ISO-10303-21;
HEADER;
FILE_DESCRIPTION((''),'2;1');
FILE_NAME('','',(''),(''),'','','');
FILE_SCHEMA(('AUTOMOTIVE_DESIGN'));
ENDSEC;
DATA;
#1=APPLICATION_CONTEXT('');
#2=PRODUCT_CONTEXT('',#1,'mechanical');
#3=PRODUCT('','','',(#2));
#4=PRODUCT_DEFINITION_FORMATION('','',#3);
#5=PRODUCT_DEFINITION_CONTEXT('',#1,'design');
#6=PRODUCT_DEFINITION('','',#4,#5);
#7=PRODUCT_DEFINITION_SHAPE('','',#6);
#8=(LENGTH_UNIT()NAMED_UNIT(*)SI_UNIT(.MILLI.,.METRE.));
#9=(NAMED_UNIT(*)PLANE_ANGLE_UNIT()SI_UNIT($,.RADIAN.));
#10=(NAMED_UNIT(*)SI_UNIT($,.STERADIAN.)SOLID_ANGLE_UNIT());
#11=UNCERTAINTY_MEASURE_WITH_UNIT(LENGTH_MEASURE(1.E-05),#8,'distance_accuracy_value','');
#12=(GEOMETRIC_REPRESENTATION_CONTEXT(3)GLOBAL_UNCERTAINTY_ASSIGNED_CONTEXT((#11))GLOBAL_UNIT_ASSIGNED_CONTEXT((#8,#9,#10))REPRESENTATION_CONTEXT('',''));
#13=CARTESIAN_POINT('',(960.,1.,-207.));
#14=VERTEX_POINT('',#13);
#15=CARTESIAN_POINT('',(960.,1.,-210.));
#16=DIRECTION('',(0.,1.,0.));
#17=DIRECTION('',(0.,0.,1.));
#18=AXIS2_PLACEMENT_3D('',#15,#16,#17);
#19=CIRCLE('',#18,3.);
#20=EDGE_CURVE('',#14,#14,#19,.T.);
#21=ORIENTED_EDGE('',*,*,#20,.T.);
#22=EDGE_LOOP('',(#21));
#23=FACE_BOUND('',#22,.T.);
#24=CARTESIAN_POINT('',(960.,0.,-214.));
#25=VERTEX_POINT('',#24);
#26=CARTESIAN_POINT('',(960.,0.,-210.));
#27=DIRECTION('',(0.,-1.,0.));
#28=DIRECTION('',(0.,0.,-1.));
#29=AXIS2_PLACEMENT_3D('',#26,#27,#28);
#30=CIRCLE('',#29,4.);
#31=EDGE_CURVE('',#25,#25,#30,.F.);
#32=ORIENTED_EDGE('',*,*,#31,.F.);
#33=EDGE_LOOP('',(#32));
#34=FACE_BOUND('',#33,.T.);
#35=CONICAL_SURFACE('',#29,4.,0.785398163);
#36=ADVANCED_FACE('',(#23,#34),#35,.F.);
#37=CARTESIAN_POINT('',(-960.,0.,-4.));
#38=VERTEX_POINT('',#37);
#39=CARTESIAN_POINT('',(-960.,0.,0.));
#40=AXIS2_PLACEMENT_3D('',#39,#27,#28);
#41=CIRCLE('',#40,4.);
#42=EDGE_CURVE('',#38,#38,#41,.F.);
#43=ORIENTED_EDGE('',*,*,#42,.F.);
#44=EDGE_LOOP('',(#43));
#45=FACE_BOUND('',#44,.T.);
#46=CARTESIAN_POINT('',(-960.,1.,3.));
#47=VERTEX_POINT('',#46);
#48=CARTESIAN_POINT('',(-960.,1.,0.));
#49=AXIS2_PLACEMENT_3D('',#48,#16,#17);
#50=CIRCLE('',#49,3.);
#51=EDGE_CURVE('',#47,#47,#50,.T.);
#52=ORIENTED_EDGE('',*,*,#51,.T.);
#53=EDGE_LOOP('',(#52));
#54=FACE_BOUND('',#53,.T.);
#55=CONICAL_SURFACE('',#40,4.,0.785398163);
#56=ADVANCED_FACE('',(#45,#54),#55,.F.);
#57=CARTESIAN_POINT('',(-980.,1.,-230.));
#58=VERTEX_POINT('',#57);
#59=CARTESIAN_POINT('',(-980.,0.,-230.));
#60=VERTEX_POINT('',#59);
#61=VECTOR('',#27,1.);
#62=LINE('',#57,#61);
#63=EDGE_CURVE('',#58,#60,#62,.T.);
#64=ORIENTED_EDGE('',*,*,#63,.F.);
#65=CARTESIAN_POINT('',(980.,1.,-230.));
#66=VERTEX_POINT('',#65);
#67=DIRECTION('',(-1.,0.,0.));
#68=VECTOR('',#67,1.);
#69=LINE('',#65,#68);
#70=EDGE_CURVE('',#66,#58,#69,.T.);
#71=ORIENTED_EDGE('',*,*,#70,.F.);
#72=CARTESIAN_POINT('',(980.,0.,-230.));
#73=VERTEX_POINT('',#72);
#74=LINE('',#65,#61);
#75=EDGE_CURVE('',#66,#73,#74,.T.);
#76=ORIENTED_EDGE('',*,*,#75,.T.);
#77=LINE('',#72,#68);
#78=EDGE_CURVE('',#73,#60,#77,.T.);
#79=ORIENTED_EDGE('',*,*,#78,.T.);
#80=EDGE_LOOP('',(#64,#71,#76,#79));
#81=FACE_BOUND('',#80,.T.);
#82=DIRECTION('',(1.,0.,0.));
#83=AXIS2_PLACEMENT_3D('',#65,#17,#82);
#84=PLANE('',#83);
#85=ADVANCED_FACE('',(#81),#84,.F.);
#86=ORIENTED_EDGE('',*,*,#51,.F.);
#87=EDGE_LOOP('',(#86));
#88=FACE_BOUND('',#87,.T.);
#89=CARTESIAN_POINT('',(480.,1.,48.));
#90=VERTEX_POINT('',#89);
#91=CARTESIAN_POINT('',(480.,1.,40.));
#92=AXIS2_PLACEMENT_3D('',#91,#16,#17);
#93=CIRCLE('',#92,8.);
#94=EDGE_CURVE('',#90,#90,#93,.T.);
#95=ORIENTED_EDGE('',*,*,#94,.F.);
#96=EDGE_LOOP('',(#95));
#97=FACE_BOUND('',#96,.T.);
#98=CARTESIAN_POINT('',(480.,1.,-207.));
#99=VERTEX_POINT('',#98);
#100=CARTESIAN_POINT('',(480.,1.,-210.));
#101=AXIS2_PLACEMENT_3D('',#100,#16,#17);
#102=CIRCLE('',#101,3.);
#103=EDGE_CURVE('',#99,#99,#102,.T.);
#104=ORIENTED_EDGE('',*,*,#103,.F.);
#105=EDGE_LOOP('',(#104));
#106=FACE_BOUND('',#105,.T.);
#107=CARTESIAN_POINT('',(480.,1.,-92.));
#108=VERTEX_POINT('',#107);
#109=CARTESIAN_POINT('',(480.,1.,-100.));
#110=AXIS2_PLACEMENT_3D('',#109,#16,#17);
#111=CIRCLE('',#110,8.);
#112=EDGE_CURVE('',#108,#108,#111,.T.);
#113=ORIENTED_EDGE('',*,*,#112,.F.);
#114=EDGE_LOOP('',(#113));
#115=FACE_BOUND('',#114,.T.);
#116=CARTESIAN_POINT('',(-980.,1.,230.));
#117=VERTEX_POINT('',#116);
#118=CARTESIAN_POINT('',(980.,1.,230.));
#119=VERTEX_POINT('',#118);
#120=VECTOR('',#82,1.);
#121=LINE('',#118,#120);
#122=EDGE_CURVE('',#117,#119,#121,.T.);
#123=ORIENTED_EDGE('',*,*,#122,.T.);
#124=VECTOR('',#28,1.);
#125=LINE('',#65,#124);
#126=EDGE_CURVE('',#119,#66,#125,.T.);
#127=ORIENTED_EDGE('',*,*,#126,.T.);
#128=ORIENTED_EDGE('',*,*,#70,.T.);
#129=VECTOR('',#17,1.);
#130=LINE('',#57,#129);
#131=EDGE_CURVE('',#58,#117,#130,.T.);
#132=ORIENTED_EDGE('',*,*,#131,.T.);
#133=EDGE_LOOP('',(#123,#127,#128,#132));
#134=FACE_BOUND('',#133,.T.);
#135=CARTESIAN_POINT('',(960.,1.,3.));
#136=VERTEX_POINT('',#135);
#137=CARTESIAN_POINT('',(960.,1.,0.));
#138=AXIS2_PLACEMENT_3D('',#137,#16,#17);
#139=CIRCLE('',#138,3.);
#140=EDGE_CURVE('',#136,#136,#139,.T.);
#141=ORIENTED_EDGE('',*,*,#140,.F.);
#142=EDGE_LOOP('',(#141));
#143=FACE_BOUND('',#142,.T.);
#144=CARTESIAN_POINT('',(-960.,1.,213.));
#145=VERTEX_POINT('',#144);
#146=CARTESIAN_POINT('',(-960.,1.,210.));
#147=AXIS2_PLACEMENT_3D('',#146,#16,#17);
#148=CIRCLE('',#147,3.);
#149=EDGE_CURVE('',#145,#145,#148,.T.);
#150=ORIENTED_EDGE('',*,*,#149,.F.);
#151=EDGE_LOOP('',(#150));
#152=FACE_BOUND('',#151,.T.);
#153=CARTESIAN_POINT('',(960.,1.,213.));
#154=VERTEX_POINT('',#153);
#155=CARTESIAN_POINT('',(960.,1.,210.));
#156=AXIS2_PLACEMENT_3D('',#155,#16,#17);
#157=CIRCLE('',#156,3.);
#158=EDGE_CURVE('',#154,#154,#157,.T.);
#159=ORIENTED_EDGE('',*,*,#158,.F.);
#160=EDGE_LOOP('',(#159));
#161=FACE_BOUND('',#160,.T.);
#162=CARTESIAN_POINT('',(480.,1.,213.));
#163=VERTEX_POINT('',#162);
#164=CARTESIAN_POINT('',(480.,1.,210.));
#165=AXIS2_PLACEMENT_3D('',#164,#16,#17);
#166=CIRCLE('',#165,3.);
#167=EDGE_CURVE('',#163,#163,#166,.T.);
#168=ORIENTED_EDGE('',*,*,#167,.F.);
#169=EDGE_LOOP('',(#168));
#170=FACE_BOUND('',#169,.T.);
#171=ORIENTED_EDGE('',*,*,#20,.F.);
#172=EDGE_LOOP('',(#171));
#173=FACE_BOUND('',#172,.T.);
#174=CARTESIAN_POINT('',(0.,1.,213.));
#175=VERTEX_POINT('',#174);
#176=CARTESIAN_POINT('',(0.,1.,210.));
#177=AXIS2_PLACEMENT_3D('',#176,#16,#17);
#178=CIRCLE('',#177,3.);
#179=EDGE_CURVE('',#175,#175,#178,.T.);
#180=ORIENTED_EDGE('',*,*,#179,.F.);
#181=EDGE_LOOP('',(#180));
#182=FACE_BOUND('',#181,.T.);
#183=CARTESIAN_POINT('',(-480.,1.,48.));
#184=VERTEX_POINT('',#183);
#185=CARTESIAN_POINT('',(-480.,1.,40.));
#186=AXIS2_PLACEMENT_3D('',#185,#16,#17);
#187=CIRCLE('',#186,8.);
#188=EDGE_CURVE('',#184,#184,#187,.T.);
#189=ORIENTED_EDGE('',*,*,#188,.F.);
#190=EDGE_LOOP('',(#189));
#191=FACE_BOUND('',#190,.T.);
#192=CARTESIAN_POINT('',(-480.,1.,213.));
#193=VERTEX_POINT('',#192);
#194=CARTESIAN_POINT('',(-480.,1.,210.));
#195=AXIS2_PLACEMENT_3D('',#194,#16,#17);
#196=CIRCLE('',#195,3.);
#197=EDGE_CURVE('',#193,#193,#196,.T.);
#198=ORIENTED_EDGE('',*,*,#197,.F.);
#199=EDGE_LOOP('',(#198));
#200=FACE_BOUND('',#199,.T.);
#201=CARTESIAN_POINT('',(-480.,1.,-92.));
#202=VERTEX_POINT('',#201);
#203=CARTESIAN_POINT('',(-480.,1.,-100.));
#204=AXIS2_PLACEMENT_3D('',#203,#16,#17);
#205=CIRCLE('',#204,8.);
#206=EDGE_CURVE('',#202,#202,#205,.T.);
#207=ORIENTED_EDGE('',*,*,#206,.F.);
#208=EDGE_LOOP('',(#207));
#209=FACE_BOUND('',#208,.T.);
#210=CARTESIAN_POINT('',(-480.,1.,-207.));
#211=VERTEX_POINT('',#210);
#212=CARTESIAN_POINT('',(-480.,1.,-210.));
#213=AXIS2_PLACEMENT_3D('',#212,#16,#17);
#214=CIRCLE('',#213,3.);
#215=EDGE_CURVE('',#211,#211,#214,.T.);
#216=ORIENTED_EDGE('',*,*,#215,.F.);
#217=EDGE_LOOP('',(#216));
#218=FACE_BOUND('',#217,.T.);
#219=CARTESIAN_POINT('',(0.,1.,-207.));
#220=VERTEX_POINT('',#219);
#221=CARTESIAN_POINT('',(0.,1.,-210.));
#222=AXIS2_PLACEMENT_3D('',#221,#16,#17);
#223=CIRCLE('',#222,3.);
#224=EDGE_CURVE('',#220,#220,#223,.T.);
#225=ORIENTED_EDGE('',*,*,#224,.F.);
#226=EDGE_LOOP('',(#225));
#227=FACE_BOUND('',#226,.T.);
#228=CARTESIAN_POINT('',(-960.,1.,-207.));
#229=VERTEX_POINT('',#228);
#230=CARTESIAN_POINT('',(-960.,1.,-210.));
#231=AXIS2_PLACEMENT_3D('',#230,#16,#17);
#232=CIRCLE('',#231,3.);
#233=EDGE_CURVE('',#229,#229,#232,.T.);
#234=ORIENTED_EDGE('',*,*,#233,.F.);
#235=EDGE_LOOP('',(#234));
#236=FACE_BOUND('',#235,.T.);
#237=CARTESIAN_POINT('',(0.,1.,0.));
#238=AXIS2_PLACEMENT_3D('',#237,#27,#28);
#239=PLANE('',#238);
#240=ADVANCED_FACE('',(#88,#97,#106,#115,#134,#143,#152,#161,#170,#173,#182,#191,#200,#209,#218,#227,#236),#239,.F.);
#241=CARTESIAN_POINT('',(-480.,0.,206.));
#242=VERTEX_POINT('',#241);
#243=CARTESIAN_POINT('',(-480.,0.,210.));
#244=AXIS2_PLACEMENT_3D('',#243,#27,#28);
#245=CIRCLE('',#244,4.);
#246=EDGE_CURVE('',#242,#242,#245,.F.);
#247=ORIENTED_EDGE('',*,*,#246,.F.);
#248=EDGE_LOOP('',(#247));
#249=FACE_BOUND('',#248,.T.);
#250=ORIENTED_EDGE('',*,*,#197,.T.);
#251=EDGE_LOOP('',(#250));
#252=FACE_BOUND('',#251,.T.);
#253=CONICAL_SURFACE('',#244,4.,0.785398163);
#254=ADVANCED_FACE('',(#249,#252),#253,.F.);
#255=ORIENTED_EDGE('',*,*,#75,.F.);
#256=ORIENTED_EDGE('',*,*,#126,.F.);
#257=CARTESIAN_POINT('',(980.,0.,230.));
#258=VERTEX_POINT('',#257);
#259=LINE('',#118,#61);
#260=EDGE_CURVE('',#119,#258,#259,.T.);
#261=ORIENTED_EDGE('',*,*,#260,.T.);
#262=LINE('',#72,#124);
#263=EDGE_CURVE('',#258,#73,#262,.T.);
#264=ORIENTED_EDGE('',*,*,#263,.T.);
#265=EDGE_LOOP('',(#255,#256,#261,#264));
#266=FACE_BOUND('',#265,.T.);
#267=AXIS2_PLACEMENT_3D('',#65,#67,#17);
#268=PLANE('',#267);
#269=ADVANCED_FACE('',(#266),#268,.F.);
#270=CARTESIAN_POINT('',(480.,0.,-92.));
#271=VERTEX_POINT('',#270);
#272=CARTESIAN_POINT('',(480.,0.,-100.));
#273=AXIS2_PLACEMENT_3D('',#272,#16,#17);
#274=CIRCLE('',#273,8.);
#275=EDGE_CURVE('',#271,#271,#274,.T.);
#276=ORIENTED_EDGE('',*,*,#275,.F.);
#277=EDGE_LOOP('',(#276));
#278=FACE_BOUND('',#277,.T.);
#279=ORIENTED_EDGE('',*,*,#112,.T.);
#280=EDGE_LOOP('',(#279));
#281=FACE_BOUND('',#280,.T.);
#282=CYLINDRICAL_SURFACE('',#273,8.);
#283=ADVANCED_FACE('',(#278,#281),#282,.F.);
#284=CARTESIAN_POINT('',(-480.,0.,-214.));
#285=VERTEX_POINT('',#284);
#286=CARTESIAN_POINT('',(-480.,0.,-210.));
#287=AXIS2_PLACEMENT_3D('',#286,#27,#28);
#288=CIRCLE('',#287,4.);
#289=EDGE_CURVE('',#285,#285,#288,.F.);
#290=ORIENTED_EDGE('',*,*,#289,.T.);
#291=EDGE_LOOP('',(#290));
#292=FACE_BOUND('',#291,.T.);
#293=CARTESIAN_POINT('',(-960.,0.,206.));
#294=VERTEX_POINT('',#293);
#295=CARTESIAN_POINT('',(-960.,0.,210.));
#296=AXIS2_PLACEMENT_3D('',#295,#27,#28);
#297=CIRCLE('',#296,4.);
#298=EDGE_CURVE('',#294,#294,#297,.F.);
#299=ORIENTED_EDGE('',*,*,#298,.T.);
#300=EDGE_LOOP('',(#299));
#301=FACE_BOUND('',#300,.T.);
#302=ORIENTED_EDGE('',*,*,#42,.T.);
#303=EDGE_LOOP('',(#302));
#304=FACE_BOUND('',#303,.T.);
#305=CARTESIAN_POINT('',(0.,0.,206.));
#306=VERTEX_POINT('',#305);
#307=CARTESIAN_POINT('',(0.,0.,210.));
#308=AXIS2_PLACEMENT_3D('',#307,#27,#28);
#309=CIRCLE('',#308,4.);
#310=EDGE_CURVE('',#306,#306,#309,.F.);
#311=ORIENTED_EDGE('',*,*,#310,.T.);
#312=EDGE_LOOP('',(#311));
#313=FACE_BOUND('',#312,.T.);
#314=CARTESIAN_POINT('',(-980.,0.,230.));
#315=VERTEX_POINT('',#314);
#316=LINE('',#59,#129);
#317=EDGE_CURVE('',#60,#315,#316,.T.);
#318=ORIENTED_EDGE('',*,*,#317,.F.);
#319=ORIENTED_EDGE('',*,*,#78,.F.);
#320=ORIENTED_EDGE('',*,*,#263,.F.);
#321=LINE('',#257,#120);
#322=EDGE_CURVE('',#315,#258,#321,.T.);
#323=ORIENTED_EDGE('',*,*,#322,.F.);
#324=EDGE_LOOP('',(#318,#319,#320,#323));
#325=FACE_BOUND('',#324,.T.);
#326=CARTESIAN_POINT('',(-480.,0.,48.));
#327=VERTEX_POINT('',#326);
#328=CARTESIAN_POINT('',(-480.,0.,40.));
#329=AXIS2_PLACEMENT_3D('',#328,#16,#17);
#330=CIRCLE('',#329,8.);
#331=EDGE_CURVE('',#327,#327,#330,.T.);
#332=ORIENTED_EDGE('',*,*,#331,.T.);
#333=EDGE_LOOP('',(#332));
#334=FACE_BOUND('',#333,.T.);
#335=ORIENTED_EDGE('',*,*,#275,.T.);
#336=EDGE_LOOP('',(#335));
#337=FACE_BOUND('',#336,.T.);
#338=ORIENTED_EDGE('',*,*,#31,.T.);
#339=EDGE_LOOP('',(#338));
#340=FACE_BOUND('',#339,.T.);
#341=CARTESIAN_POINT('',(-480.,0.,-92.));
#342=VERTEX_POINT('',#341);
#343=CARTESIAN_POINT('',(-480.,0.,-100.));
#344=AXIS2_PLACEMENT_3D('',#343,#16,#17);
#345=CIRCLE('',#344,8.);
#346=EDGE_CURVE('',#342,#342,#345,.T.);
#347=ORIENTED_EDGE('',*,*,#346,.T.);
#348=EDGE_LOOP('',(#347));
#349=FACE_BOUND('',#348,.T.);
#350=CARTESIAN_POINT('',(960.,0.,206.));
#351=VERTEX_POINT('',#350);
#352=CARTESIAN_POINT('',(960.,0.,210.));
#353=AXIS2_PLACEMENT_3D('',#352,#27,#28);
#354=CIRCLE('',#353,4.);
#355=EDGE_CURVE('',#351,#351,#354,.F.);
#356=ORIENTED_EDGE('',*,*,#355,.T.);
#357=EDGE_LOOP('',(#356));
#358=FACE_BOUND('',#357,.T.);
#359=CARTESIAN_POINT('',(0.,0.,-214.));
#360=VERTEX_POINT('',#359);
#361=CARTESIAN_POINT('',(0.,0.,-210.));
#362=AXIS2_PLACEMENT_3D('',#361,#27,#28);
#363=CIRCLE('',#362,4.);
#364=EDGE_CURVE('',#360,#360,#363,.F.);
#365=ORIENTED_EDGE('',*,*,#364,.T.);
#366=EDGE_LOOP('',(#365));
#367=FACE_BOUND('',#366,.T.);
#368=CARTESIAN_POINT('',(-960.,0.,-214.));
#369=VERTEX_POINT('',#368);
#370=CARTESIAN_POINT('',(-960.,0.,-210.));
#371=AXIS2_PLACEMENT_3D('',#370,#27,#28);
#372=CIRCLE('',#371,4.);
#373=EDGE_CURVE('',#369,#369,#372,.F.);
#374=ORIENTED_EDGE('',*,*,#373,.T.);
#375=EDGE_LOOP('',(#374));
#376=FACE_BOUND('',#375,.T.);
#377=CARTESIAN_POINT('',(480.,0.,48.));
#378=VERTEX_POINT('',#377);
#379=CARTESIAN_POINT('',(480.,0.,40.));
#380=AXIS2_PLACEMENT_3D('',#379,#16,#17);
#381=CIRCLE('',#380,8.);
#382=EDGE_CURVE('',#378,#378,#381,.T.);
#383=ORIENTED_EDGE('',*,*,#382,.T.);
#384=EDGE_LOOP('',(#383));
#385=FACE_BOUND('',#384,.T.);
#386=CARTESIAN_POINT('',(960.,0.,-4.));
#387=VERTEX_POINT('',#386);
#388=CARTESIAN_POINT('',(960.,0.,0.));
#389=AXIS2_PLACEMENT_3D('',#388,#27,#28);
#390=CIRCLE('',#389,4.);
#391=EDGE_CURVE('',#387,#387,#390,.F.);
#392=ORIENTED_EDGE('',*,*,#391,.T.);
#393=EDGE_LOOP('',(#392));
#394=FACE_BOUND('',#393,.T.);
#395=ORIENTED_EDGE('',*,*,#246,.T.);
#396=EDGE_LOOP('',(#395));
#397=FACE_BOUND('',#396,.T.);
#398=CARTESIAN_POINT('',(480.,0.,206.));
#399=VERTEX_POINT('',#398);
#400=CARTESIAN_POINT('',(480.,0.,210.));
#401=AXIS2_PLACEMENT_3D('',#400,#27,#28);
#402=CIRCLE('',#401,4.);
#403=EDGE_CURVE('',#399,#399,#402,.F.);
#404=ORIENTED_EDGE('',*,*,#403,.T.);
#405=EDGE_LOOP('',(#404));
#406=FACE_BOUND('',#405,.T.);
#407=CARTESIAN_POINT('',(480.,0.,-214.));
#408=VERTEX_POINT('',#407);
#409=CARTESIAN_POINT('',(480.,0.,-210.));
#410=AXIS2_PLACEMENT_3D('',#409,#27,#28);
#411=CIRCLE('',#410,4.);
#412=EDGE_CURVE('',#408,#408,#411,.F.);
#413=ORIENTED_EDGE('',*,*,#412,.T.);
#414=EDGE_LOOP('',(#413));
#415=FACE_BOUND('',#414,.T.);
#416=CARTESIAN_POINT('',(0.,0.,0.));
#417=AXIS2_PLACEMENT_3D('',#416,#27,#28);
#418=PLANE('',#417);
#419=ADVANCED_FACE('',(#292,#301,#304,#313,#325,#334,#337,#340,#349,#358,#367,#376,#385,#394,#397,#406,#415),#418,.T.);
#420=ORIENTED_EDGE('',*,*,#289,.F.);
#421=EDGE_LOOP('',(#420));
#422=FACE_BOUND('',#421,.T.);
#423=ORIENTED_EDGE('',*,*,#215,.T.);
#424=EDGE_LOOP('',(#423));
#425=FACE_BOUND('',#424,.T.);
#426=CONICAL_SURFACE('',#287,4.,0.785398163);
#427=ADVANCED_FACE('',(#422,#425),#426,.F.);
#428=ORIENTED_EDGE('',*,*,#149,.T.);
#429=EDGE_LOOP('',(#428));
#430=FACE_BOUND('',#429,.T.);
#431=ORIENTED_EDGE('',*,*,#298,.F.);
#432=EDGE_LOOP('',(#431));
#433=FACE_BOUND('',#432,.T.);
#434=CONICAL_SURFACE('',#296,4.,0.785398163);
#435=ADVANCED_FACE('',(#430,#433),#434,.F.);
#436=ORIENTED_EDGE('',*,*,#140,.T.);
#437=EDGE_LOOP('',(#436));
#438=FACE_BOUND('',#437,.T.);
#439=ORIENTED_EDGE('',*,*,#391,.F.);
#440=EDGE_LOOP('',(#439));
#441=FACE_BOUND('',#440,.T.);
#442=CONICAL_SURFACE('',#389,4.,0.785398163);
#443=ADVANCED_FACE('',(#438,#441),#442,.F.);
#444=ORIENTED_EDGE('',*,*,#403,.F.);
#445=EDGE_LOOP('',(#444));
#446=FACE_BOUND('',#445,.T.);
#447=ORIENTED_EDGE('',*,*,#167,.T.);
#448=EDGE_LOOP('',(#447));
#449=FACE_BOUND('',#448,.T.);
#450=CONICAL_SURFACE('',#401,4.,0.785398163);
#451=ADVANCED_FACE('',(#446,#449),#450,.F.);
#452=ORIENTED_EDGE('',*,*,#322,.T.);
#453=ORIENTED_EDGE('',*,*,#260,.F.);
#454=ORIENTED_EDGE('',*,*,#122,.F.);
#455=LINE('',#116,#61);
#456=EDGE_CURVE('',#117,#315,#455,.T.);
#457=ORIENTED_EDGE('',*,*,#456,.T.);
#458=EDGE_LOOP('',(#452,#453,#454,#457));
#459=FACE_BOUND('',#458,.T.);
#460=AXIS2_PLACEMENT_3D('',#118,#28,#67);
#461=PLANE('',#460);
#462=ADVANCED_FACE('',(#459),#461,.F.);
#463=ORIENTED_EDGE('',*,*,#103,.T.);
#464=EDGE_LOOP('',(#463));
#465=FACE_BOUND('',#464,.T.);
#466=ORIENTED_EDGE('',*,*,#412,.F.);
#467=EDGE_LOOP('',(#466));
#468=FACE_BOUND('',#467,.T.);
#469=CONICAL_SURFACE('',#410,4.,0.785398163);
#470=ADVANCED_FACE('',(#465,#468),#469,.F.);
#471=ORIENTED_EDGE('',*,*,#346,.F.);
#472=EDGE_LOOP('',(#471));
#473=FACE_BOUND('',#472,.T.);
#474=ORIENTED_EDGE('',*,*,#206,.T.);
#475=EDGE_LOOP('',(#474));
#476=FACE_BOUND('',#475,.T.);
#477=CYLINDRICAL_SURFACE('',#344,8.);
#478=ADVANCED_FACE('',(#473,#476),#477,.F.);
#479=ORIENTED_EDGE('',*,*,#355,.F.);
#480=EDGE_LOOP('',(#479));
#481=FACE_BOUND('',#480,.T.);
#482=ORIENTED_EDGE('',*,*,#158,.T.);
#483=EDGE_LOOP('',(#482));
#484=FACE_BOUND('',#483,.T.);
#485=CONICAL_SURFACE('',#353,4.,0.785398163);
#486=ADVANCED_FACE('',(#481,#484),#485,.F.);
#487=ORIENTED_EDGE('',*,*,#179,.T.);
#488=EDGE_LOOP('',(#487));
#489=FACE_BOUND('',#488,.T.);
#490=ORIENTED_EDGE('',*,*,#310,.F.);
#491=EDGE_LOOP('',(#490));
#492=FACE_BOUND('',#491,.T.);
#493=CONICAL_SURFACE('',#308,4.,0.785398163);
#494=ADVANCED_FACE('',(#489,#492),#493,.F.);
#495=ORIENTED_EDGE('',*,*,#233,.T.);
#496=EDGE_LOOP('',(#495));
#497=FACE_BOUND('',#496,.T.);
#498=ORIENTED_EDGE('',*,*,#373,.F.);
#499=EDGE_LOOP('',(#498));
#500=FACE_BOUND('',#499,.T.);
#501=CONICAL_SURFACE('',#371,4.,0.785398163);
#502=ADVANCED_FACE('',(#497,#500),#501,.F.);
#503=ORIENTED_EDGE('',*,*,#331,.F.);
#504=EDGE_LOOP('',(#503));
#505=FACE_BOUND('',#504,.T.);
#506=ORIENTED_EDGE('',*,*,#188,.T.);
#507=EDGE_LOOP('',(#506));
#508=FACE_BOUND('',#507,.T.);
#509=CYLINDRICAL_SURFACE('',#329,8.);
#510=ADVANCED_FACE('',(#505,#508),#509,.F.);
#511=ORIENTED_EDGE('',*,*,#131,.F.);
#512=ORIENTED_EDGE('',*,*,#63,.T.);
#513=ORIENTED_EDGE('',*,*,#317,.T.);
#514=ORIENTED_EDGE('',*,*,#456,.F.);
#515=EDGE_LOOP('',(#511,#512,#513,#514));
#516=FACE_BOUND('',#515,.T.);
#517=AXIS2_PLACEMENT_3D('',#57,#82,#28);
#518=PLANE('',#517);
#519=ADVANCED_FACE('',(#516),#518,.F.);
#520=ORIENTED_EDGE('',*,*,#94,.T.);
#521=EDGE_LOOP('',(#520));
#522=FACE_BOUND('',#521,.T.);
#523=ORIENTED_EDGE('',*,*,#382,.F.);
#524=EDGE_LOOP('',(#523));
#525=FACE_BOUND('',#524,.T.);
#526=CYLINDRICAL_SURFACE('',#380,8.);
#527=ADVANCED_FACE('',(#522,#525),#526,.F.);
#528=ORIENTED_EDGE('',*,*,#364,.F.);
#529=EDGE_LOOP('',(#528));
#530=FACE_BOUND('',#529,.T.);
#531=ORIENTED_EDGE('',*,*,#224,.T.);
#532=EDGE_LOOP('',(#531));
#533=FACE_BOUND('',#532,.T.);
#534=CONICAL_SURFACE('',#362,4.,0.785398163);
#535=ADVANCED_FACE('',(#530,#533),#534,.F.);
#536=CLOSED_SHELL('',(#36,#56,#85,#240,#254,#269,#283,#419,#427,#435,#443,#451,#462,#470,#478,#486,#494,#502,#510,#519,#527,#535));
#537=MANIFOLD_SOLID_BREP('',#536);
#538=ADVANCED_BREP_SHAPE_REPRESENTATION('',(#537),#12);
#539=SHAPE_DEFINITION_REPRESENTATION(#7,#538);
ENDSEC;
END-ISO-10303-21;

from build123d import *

# Parameters (mm, degrees)
SKETCH1_W           = 1960
SKETCH1_H           = 460
BOSS_EXTRUDE1_DEPTH = 1
SKETCH2_R           = 8
SKETCH2_R_2         = 3
CUT_EXTRUDE1_DEPTH  = 1007.628531286
CHAMFER1_SIZE       = 1


with BuildPart() as part:
    # Sketch1 → Boss-Extrude1 (new body)
    with BuildSketch(Plane(origin=(0, 0, 0), x_dir=(1, 0, 0), z_dir=(0, 1, 0))):
        Rectangle(SKETCH1_W, SKETCH1_H)
    extrude(amount=BOSS_EXTRUDE1_DEPTH)

    # Sketch2 → Cut-Extrude1 (cut, through all)
    with BuildSketch(Plane(origin=(0, 1, 0), x_dir=(1, 0, 0), z_dir=(0, 1, 0))):
        with Locations(Location((480, -40, 0), (0, 0, 270))):
            Circle(SKETCH2_R)
        with Locations(Location((-480, -40, 0), (0, 0, 270))):
            Circle(SKETCH2_R)
        with Locations(Location((-480, 100, 0), (0, 0, 270))):
            Circle(SKETCH2_R)
        with Locations(Location((480, 100, 0), (0, 0, 270))):
            Circle(SKETCH2_R)
        with Locations(Location((960, -210, 0), (0, 0, 270))):
            Circle(SKETCH2_R_2)
        with Locations(Location((-960, -210, 0), (0, 0, 270))):
            Circle(SKETCH2_R_2)
        with Locations(Location((-960, 210, 0), (0, 0, 270))):
            Circle(SKETCH2_R_2)
        with Locations(Location((960, 210, 0), (0, 0, 270))):
            Circle(SKETCH2_R_2)
        with Locations(Location((-960, 0, 0), (0, 0, 270))):
            Circle(SKETCH2_R_2)
        with Locations(Location((960, 0, 0), (0, 0, 270))):
            Circle(SKETCH2_R_2)
        with Locations(Location((0, -210, 0), (0, 0, 270))):
            Circle(SKETCH2_R_2)
        with Locations(Location((0, 210, 0), (0, 0, 270))):
            Circle(SKETCH2_R_2)
        with Locations(Location((480, -210, 0), (0, 0, 270))):
            Circle(SKETCH2_R_2)
        with Locations(Location((-480, -210, 0), (0, 0, 270))):
            Circle(SKETCH2_R_2)
        with Locations(Location((-480, 210, 0), (0, 0, 270))):
            Circle(SKETCH2_R_2)
        with Locations(Location((480, 210, 0), (0, 0, 270))):
            Circle(SKETCH2_R_2)
    extrude(amount=-CUT_EXTRUDE1_DEPTH, mode=Mode.SUBTRACT)

    # Chamfer1
    chamfer1_edges = [part.edges().sort_by_distance(p)[0] for p in [
        (-960, 0, 207),
        (-960, 0, -213),
        (960, 0, -213),
        (-960, 0, -3),
        (960, 0, 207),
        (480, 0, -213),
        (-480, 0, -213),
        (-480, 0, 207),
        (960, 0, -3),
        (0, 0, 207),
        (0, 0, -213),
        (480, 0, 207),
    ]]
    chamfer(chamfer1_edges, length=CHAMFER1_SIZE - 0.0001)  # a hair under: the kernel refuses the full size


solid = part.part
